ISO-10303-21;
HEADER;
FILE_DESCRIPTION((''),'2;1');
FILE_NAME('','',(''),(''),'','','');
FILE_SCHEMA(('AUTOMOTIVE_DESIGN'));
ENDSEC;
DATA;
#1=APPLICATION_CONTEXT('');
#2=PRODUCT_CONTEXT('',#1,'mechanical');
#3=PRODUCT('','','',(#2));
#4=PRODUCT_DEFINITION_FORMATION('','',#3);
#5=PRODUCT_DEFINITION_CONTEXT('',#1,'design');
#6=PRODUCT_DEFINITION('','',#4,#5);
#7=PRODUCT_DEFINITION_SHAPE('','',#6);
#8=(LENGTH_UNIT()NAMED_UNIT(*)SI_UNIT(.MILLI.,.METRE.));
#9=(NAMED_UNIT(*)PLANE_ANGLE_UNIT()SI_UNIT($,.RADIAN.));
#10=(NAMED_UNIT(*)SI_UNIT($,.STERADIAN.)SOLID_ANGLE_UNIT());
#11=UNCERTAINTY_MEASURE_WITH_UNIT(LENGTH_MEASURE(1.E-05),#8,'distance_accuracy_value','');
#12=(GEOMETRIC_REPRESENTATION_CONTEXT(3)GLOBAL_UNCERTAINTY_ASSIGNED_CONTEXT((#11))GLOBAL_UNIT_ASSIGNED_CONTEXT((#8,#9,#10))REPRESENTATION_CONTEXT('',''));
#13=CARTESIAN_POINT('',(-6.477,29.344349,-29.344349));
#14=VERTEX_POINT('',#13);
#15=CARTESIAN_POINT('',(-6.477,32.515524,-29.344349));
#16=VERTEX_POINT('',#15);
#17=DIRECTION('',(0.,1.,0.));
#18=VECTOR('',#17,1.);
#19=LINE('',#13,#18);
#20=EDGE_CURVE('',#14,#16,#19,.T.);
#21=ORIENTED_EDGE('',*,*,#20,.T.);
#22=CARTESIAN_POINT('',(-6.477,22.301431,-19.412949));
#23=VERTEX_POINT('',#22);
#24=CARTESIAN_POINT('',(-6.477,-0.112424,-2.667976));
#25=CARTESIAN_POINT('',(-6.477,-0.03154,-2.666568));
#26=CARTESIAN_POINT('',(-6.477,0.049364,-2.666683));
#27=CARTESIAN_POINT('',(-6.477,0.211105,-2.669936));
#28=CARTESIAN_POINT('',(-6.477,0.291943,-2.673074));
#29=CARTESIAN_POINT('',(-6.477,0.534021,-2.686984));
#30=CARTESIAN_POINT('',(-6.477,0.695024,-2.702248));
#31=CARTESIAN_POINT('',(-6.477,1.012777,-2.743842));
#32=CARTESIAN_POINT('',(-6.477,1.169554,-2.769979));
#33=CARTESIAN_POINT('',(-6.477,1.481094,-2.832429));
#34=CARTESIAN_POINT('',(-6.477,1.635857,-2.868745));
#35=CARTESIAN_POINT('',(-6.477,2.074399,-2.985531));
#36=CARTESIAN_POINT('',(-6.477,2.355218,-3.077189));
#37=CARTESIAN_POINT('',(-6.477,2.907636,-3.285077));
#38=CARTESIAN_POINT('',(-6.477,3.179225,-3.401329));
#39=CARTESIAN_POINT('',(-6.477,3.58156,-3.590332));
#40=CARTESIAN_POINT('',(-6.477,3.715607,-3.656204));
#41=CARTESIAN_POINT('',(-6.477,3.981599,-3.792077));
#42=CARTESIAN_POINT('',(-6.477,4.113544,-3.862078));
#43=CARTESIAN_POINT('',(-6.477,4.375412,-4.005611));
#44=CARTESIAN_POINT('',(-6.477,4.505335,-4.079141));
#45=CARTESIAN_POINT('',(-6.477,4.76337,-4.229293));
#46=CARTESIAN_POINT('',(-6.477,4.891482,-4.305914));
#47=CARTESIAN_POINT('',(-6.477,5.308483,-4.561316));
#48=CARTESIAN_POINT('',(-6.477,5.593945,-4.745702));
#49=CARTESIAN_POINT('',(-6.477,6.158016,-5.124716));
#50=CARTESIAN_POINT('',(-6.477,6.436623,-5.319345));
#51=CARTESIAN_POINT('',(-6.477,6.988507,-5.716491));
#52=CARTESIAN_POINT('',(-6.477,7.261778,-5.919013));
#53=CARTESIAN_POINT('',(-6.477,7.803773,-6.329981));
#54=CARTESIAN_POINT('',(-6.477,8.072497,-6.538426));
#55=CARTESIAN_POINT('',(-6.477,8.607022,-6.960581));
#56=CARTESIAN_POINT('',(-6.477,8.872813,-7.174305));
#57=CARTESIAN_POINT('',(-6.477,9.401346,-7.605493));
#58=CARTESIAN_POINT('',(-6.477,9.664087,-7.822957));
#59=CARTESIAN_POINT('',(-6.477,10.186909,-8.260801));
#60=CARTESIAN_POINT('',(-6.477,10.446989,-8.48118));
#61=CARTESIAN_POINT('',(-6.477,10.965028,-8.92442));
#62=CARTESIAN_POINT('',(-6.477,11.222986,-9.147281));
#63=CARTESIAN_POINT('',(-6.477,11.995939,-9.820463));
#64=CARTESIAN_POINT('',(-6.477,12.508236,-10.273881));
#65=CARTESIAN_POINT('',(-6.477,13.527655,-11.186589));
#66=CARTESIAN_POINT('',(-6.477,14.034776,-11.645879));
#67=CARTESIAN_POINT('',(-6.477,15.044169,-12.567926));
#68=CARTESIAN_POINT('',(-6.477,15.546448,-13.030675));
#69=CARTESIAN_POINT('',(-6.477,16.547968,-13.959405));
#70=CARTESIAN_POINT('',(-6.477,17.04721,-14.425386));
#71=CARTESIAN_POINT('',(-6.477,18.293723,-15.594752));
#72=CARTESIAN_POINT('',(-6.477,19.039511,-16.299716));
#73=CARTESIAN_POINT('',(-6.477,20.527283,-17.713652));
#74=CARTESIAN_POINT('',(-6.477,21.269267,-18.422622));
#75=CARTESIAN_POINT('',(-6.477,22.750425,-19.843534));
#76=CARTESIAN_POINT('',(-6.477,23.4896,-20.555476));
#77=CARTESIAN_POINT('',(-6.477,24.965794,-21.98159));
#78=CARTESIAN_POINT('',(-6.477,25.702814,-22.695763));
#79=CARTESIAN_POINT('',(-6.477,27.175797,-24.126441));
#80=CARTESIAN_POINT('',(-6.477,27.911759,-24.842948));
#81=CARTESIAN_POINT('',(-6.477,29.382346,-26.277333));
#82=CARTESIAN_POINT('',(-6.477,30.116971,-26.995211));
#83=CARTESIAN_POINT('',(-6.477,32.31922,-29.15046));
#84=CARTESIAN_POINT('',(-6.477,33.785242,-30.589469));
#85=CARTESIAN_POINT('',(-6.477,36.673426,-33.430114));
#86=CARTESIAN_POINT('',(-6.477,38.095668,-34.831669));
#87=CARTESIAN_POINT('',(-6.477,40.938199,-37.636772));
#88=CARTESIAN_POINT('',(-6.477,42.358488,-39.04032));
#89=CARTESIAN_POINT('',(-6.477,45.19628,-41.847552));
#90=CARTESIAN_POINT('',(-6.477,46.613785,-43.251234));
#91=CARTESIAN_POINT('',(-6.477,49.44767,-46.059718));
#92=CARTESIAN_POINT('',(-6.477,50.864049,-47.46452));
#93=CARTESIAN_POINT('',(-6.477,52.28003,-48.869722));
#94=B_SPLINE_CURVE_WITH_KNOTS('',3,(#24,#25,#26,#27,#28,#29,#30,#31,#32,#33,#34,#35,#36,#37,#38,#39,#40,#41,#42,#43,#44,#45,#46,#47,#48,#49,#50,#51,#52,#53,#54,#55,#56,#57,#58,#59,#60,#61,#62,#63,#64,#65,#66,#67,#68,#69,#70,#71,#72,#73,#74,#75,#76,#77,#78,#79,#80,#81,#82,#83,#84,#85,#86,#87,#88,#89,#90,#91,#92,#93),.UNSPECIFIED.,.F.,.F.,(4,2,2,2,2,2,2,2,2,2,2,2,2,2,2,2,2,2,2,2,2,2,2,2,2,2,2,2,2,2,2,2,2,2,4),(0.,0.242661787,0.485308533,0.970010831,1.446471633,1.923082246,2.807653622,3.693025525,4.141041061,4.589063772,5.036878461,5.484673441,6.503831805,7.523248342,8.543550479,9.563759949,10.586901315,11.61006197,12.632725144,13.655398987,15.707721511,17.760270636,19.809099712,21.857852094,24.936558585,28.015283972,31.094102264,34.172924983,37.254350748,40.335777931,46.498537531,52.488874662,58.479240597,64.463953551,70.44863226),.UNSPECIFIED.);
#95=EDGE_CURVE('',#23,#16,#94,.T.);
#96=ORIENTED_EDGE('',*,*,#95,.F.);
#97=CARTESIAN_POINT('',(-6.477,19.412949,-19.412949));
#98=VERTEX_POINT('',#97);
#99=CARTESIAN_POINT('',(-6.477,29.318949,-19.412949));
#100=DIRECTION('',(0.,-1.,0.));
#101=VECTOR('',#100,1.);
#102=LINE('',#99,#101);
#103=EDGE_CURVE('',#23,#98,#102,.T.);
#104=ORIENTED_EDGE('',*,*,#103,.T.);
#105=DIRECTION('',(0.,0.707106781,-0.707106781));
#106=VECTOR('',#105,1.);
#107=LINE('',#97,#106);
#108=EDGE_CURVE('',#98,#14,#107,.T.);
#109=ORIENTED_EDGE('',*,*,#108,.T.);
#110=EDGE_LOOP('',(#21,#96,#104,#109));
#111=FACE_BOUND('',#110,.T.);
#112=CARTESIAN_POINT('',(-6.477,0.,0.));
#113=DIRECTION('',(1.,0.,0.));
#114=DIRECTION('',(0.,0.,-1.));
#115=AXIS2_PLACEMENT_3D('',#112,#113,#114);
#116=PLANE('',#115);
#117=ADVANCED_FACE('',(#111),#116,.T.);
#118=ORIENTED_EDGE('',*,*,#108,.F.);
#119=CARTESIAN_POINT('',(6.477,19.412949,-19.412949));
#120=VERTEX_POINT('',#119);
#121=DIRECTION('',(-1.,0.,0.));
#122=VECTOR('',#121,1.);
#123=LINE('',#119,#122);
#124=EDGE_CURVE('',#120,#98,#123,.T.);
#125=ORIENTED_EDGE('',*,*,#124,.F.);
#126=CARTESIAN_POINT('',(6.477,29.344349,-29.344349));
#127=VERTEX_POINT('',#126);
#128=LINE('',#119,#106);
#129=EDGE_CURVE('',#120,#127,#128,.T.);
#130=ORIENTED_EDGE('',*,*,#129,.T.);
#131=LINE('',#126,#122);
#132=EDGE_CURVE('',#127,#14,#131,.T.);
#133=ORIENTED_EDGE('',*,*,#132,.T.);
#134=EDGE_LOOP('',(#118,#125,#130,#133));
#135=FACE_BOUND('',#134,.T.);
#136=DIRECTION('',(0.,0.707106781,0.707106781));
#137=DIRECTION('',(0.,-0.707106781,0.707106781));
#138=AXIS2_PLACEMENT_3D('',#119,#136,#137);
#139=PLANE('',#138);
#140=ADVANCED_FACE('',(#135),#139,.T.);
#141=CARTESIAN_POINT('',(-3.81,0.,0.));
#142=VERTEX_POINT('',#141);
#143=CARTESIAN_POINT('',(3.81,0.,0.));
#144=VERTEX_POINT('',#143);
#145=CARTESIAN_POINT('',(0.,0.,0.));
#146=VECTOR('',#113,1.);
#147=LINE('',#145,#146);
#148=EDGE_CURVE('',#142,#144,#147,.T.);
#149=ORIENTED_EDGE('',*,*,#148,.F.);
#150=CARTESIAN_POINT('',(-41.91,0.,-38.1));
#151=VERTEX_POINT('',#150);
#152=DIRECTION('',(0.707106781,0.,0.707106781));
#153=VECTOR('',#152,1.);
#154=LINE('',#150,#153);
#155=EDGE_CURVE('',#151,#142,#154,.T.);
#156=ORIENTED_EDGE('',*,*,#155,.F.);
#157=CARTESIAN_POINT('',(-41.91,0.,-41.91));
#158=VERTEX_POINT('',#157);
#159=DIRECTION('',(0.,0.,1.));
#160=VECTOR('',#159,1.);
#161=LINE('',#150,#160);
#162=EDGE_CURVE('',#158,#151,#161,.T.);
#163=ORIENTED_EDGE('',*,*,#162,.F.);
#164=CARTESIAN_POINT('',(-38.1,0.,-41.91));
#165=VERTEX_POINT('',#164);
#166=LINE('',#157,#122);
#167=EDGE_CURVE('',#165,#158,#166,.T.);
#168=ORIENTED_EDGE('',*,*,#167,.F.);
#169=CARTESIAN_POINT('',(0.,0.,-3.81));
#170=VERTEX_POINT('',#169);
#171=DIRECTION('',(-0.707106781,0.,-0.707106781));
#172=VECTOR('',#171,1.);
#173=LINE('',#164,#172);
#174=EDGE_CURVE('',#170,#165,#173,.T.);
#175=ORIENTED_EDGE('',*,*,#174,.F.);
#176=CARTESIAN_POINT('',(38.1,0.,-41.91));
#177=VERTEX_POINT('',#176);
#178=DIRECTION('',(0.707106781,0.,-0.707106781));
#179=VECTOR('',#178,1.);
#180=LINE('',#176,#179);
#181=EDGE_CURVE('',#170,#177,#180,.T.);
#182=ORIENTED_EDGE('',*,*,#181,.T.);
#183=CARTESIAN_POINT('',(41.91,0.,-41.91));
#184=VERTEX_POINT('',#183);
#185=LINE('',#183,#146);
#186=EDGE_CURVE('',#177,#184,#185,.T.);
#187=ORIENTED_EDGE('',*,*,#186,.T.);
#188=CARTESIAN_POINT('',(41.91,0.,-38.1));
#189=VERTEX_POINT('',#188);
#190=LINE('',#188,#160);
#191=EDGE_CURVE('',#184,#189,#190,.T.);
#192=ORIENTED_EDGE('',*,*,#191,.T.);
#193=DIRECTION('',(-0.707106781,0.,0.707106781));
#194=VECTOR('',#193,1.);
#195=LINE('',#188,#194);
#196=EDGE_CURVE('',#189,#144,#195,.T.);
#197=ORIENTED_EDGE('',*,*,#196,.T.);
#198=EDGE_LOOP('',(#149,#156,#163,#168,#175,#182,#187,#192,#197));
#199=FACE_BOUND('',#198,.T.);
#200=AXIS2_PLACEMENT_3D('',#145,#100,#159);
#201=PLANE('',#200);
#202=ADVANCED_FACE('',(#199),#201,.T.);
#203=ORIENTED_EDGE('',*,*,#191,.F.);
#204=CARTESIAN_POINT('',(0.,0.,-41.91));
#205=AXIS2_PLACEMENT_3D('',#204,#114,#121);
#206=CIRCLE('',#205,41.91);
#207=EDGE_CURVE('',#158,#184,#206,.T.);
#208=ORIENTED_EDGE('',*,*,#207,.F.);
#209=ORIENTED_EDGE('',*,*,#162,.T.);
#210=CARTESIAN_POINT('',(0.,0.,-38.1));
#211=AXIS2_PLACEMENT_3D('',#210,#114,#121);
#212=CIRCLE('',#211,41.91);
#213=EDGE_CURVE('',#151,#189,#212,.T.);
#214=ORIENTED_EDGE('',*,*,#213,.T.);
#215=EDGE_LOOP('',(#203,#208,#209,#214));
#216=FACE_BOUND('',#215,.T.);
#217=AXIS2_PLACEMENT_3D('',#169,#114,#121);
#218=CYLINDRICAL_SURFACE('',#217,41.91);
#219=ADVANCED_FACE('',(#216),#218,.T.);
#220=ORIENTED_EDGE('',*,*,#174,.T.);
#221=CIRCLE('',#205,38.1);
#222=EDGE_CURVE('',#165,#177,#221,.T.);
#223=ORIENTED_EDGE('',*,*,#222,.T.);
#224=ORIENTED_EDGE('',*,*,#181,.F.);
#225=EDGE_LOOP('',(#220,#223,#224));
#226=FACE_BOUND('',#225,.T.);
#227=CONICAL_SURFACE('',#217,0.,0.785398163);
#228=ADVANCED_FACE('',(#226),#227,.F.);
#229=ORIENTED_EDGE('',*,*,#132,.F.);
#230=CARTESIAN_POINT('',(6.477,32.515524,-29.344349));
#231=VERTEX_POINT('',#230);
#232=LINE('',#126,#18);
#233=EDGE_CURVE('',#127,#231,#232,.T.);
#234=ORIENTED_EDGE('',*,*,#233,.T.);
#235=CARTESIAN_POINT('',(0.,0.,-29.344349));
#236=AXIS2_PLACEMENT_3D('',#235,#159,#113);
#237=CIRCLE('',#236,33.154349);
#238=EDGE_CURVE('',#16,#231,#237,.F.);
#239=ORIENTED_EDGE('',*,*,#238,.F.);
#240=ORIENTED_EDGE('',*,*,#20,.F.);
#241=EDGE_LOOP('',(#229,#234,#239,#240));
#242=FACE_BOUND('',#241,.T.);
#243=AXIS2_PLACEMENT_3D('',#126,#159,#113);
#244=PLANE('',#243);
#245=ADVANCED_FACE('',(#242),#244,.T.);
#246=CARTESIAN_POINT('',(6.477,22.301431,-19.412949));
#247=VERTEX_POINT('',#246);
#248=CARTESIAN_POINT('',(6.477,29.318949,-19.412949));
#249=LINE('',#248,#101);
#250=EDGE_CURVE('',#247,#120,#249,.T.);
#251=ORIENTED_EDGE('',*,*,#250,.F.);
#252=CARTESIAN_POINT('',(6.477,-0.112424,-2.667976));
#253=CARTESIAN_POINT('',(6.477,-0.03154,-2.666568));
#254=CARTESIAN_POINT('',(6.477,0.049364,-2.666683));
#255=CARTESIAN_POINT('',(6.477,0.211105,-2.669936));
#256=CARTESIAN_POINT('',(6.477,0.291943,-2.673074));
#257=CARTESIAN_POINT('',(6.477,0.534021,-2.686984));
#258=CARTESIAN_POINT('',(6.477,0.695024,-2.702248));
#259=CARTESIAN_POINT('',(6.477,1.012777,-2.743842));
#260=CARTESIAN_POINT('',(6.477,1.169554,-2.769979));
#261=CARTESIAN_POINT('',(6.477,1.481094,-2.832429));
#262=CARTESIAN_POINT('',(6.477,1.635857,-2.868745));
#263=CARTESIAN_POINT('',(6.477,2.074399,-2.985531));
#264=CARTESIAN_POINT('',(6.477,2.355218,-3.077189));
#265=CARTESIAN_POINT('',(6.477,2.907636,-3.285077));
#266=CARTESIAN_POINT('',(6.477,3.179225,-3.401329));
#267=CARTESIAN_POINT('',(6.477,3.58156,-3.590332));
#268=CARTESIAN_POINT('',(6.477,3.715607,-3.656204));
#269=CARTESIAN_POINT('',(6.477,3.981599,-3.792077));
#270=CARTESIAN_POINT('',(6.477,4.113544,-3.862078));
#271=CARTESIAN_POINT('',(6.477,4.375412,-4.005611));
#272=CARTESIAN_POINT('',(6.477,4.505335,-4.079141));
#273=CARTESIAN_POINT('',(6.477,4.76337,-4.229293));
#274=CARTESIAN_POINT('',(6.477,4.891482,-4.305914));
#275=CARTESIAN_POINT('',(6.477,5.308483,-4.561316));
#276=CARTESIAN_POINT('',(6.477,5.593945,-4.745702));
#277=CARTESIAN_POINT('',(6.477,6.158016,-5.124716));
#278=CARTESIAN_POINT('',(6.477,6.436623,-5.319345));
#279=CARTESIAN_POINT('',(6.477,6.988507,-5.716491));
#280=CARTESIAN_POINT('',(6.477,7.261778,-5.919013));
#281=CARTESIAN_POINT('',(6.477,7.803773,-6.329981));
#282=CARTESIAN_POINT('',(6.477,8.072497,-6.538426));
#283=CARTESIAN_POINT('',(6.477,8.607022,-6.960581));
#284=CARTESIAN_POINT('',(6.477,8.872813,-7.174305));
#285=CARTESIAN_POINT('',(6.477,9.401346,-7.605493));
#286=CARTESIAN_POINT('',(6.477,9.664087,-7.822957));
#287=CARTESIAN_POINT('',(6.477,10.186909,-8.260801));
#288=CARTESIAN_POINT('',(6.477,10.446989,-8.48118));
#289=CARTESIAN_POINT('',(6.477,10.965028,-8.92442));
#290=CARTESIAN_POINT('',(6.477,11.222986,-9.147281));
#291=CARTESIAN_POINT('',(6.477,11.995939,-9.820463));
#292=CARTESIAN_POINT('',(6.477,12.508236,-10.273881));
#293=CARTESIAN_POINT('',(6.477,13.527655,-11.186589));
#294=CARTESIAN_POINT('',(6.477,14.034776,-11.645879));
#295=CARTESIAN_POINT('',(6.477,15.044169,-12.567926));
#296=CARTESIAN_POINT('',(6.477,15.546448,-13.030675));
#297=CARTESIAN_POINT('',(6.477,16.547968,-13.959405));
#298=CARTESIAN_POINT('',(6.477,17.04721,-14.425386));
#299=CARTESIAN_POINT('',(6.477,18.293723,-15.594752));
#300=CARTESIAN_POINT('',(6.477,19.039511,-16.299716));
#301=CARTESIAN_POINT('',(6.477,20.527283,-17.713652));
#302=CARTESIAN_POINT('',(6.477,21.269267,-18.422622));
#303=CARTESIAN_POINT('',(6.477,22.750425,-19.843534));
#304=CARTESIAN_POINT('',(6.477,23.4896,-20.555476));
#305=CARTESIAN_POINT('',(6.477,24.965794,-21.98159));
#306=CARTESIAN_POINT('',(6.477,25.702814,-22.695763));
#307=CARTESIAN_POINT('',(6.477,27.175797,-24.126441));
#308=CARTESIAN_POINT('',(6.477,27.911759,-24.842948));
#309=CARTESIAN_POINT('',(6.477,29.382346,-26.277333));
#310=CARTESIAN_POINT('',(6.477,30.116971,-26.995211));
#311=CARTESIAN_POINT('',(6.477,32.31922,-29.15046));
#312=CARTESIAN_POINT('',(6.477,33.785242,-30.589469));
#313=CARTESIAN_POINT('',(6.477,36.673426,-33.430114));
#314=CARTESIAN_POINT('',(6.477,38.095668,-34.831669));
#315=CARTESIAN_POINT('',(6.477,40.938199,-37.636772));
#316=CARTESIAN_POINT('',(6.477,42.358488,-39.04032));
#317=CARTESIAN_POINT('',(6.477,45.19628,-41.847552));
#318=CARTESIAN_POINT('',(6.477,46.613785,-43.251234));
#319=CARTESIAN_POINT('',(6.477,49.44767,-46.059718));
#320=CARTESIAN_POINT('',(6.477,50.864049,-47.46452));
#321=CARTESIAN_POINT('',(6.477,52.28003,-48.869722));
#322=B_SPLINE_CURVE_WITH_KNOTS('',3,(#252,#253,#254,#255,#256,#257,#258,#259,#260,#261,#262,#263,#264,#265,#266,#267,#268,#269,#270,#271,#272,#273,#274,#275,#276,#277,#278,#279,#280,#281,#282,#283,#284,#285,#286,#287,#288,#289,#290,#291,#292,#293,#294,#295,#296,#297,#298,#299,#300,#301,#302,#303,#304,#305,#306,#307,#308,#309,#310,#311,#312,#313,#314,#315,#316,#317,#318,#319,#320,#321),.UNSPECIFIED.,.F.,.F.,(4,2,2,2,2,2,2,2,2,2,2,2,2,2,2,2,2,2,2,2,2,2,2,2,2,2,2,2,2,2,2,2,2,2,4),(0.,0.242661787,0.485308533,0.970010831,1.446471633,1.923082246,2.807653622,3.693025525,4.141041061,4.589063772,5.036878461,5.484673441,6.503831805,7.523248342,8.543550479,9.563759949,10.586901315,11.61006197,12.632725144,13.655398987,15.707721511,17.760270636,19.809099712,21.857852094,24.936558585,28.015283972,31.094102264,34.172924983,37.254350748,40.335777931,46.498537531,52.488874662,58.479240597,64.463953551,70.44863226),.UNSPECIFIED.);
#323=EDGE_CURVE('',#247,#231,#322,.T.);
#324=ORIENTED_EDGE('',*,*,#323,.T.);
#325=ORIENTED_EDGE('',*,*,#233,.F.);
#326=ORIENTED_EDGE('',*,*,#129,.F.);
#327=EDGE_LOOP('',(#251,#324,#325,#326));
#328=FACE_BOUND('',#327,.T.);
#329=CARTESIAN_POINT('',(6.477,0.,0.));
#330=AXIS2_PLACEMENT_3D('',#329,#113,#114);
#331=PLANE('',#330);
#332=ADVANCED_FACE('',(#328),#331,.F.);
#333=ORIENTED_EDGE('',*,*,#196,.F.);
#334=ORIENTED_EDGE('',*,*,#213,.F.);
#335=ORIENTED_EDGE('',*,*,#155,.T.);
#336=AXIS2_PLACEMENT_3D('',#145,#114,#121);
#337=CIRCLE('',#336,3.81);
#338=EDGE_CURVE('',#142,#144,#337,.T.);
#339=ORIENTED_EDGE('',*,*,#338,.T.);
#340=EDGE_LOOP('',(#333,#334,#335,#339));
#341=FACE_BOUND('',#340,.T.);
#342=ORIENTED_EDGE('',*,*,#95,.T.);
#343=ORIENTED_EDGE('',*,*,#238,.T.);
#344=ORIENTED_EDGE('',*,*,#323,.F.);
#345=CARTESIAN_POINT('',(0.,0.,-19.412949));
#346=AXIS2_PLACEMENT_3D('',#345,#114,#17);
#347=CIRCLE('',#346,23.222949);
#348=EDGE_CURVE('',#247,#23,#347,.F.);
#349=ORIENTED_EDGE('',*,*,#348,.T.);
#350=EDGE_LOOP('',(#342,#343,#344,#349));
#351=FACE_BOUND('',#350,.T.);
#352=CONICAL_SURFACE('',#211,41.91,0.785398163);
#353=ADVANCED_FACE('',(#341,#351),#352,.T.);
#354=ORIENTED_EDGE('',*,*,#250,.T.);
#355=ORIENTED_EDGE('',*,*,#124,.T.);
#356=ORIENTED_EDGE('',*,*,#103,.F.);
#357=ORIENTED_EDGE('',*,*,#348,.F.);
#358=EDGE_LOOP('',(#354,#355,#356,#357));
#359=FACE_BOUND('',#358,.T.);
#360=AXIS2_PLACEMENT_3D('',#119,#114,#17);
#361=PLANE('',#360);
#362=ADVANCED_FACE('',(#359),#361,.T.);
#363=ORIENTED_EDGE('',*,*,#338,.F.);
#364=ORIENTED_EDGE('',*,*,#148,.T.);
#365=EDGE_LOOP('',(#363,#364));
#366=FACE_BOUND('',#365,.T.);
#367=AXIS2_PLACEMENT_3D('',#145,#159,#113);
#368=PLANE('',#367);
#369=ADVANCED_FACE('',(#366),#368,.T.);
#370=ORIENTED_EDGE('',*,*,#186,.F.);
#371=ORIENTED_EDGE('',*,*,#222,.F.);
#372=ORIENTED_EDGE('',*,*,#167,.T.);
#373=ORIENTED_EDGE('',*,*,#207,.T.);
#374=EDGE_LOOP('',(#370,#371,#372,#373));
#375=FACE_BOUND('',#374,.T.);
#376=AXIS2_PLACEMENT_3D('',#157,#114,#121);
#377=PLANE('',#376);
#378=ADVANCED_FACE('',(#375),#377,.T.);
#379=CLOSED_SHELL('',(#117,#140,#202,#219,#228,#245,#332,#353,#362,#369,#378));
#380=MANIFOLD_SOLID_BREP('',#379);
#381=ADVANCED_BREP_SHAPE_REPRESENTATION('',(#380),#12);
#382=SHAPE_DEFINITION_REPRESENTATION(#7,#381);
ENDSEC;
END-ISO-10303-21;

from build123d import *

# Parameters (mm, degrees)
REVOLVE2_ANGLE          = 180
CUT_EXTRUDE1_DEPTH      = 6.477
CUT_EXTRUDE1_DEPTH_BACK = 6.477


# Read off the part's stored shape, not the designer's step: Revolve2
with BuildPart() as part:
    # Revolve2 outline → Revolve2 (revolve)
    with BuildSketch(Plane.XZ):
        Polygon((3.81, 0), (0, 0), (0, -3.81), (38.1, -41.91), (41.91, -41.91), (41.91, -38.1), align=None)
    revolve(axis=Axis((0, 0, 0), (0, 0, 1)), revolution_arc=REVOLVE2_ANGLE)

    # Sketch6 → Cut-Extrude1 (cut, two sides: drawn at the far end of the back side and taken through both)
    with BuildSketch(Plane(origin=(0, 0, 0), x_dir=(0, 0, -1), z_dir=(1, 0, 0)).offset(-CUT_EXTRUDE1_DEPTH_BACK)):
        Polygon((19.412948776, 19.412948776), (19.412948776, 29.318948776), (19.412948776, 36.223650293), (29.344348776, 36.223650293), (29.344348776, 29.344348776), align=None)
    extrude(amount=CUT_EXTRUDE1_DEPTH + CUT_EXTRUDE1_DEPTH_BACK, mode=Mode.SUBTRACT)


solid = part.part
